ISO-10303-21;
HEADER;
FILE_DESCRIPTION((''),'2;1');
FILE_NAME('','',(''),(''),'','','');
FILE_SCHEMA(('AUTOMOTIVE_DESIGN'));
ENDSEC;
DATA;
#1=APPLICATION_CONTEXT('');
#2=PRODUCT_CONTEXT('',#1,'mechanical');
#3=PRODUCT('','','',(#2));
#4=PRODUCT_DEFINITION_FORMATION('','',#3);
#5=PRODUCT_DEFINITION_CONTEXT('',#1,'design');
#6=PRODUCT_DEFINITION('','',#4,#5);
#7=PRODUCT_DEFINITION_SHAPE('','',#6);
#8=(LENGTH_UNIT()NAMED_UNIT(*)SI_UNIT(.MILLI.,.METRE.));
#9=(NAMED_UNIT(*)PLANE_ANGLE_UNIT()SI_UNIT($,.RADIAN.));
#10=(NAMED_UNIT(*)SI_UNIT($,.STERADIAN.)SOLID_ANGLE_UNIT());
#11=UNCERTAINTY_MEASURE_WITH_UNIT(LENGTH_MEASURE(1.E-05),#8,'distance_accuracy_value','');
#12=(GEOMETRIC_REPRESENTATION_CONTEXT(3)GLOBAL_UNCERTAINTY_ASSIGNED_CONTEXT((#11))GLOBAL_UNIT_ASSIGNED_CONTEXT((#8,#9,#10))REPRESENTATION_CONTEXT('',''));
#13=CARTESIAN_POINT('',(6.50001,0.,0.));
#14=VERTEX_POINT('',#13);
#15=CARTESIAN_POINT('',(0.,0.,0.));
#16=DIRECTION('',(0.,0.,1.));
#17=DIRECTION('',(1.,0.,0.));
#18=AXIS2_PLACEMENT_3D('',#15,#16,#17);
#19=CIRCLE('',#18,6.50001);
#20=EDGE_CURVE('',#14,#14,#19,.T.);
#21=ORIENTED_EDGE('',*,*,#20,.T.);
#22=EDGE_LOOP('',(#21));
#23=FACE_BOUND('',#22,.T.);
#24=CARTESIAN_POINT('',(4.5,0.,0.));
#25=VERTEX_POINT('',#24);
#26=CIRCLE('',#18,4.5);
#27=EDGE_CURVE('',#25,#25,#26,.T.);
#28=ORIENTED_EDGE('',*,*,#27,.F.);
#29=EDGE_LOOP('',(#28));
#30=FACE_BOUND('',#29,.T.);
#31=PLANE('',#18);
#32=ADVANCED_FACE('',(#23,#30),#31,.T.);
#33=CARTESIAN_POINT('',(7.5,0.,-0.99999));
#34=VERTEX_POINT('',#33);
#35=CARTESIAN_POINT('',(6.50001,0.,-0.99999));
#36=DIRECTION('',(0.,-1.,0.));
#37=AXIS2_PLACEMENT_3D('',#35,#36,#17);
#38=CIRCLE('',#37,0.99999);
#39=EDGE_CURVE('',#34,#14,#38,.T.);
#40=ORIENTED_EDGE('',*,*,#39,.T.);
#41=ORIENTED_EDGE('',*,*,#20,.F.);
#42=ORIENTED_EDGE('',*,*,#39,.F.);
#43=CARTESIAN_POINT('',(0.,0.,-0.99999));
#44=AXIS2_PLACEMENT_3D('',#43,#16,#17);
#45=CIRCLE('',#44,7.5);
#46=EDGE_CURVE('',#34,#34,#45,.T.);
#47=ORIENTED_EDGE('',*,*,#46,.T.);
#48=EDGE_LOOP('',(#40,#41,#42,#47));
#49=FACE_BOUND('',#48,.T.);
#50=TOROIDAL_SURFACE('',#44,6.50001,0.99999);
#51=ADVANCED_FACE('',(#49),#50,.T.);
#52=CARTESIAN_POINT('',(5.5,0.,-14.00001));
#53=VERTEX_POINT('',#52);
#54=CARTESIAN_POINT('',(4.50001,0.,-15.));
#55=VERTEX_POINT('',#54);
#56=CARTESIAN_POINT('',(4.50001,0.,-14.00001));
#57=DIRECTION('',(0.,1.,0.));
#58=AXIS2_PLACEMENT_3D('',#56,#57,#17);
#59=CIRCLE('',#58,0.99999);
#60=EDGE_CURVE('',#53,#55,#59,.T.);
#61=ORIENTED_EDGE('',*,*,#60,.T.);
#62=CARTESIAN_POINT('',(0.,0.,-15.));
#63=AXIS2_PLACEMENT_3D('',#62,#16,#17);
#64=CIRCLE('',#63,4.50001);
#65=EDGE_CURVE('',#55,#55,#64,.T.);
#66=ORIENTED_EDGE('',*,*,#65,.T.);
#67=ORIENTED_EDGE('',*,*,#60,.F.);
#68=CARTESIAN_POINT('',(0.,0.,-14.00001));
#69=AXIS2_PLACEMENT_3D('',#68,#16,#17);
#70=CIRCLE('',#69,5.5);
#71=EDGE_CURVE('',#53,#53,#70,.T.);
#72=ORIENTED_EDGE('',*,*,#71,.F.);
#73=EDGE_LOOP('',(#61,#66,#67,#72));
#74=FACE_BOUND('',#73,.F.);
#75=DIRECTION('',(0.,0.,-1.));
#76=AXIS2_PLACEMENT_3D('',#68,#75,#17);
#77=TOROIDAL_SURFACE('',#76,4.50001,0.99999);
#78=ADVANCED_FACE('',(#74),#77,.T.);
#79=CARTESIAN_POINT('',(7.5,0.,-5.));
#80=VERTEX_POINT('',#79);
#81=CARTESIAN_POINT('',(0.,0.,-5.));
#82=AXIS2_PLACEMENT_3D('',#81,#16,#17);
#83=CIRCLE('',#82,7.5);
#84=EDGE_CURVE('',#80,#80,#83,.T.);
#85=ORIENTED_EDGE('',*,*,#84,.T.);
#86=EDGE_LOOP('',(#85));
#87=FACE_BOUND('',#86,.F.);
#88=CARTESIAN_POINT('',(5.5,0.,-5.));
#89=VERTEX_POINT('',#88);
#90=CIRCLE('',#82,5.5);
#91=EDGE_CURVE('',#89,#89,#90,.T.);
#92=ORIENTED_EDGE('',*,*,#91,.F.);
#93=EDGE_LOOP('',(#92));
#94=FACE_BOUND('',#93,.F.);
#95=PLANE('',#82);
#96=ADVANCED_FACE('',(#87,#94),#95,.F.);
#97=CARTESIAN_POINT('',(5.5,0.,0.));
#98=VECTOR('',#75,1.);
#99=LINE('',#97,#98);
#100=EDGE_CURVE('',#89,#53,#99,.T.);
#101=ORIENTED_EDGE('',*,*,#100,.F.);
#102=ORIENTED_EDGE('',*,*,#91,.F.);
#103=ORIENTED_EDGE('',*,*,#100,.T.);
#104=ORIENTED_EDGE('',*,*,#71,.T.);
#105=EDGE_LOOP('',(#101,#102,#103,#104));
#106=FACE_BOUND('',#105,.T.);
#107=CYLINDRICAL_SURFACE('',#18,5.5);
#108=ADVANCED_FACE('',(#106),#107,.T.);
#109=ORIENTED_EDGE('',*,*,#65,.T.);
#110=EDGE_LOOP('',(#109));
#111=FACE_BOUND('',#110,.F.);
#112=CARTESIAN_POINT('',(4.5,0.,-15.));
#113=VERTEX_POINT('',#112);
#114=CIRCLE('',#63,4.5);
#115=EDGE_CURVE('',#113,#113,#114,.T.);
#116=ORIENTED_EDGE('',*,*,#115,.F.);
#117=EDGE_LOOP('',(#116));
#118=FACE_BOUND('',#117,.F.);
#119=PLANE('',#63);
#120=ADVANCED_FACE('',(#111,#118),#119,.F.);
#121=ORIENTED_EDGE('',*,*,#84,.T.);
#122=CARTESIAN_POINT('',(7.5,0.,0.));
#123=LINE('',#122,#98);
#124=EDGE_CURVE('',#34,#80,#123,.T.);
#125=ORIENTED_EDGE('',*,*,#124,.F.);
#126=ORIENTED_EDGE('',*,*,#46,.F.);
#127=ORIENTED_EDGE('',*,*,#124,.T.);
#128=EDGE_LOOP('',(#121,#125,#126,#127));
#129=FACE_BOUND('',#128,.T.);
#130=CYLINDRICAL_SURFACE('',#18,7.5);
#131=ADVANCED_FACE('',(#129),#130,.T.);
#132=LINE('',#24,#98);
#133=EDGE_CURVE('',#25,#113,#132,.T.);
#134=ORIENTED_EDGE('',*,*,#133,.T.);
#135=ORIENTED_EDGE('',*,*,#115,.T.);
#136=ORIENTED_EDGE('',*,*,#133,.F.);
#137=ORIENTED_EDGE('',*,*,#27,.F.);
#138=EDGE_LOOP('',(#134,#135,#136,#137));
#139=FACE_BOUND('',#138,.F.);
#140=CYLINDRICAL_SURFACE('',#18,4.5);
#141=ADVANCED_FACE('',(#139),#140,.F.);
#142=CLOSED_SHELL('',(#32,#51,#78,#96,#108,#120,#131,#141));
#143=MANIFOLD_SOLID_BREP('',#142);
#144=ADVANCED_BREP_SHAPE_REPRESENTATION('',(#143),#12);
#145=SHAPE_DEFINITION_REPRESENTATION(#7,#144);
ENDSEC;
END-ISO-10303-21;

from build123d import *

# Parameters (mm, degrees)
F0_R     = 5.5
F0_R_2   = 4.5
F1_DEPTH = 15
F0_R_3   = 7.5
F2_DEPTH = 5
F3_R     = 0.99999


# Not quite as in the source:
# - a fillet or chamfer is up to 0.001 mm smaller than in the source, because OpenCascade refuses the exact size


with BuildPart() as f1:
    # F0 (on Top) → F1 (new body)
    with BuildSketch(Plane.XY):
        Circle(F0_R)
        Circle(F0_R_2, mode=Mode.SUBTRACT)
    extrude(amount=-F1_DEPTH)

    # F0 (on Top) → F2 (join)
    with BuildSketch(Plane.XY):
        Circle(F0_R_3)
        Circle(F0_R, mode=Mode.SUBTRACT)
    extrude(amount=-F2_DEPTH)

    # F3 (radius 1 in the source; OpenCascade refuses exactly that, so slightly less here)
    f3_edges = [f1.edges().sort_by_distance(p)[0] for p in [
        (-7.5, 0, 0),
        (-5.5, 0, -15),
    ]]
    fillet(f3_edges, radius=F3_R)


solid = f1.part
